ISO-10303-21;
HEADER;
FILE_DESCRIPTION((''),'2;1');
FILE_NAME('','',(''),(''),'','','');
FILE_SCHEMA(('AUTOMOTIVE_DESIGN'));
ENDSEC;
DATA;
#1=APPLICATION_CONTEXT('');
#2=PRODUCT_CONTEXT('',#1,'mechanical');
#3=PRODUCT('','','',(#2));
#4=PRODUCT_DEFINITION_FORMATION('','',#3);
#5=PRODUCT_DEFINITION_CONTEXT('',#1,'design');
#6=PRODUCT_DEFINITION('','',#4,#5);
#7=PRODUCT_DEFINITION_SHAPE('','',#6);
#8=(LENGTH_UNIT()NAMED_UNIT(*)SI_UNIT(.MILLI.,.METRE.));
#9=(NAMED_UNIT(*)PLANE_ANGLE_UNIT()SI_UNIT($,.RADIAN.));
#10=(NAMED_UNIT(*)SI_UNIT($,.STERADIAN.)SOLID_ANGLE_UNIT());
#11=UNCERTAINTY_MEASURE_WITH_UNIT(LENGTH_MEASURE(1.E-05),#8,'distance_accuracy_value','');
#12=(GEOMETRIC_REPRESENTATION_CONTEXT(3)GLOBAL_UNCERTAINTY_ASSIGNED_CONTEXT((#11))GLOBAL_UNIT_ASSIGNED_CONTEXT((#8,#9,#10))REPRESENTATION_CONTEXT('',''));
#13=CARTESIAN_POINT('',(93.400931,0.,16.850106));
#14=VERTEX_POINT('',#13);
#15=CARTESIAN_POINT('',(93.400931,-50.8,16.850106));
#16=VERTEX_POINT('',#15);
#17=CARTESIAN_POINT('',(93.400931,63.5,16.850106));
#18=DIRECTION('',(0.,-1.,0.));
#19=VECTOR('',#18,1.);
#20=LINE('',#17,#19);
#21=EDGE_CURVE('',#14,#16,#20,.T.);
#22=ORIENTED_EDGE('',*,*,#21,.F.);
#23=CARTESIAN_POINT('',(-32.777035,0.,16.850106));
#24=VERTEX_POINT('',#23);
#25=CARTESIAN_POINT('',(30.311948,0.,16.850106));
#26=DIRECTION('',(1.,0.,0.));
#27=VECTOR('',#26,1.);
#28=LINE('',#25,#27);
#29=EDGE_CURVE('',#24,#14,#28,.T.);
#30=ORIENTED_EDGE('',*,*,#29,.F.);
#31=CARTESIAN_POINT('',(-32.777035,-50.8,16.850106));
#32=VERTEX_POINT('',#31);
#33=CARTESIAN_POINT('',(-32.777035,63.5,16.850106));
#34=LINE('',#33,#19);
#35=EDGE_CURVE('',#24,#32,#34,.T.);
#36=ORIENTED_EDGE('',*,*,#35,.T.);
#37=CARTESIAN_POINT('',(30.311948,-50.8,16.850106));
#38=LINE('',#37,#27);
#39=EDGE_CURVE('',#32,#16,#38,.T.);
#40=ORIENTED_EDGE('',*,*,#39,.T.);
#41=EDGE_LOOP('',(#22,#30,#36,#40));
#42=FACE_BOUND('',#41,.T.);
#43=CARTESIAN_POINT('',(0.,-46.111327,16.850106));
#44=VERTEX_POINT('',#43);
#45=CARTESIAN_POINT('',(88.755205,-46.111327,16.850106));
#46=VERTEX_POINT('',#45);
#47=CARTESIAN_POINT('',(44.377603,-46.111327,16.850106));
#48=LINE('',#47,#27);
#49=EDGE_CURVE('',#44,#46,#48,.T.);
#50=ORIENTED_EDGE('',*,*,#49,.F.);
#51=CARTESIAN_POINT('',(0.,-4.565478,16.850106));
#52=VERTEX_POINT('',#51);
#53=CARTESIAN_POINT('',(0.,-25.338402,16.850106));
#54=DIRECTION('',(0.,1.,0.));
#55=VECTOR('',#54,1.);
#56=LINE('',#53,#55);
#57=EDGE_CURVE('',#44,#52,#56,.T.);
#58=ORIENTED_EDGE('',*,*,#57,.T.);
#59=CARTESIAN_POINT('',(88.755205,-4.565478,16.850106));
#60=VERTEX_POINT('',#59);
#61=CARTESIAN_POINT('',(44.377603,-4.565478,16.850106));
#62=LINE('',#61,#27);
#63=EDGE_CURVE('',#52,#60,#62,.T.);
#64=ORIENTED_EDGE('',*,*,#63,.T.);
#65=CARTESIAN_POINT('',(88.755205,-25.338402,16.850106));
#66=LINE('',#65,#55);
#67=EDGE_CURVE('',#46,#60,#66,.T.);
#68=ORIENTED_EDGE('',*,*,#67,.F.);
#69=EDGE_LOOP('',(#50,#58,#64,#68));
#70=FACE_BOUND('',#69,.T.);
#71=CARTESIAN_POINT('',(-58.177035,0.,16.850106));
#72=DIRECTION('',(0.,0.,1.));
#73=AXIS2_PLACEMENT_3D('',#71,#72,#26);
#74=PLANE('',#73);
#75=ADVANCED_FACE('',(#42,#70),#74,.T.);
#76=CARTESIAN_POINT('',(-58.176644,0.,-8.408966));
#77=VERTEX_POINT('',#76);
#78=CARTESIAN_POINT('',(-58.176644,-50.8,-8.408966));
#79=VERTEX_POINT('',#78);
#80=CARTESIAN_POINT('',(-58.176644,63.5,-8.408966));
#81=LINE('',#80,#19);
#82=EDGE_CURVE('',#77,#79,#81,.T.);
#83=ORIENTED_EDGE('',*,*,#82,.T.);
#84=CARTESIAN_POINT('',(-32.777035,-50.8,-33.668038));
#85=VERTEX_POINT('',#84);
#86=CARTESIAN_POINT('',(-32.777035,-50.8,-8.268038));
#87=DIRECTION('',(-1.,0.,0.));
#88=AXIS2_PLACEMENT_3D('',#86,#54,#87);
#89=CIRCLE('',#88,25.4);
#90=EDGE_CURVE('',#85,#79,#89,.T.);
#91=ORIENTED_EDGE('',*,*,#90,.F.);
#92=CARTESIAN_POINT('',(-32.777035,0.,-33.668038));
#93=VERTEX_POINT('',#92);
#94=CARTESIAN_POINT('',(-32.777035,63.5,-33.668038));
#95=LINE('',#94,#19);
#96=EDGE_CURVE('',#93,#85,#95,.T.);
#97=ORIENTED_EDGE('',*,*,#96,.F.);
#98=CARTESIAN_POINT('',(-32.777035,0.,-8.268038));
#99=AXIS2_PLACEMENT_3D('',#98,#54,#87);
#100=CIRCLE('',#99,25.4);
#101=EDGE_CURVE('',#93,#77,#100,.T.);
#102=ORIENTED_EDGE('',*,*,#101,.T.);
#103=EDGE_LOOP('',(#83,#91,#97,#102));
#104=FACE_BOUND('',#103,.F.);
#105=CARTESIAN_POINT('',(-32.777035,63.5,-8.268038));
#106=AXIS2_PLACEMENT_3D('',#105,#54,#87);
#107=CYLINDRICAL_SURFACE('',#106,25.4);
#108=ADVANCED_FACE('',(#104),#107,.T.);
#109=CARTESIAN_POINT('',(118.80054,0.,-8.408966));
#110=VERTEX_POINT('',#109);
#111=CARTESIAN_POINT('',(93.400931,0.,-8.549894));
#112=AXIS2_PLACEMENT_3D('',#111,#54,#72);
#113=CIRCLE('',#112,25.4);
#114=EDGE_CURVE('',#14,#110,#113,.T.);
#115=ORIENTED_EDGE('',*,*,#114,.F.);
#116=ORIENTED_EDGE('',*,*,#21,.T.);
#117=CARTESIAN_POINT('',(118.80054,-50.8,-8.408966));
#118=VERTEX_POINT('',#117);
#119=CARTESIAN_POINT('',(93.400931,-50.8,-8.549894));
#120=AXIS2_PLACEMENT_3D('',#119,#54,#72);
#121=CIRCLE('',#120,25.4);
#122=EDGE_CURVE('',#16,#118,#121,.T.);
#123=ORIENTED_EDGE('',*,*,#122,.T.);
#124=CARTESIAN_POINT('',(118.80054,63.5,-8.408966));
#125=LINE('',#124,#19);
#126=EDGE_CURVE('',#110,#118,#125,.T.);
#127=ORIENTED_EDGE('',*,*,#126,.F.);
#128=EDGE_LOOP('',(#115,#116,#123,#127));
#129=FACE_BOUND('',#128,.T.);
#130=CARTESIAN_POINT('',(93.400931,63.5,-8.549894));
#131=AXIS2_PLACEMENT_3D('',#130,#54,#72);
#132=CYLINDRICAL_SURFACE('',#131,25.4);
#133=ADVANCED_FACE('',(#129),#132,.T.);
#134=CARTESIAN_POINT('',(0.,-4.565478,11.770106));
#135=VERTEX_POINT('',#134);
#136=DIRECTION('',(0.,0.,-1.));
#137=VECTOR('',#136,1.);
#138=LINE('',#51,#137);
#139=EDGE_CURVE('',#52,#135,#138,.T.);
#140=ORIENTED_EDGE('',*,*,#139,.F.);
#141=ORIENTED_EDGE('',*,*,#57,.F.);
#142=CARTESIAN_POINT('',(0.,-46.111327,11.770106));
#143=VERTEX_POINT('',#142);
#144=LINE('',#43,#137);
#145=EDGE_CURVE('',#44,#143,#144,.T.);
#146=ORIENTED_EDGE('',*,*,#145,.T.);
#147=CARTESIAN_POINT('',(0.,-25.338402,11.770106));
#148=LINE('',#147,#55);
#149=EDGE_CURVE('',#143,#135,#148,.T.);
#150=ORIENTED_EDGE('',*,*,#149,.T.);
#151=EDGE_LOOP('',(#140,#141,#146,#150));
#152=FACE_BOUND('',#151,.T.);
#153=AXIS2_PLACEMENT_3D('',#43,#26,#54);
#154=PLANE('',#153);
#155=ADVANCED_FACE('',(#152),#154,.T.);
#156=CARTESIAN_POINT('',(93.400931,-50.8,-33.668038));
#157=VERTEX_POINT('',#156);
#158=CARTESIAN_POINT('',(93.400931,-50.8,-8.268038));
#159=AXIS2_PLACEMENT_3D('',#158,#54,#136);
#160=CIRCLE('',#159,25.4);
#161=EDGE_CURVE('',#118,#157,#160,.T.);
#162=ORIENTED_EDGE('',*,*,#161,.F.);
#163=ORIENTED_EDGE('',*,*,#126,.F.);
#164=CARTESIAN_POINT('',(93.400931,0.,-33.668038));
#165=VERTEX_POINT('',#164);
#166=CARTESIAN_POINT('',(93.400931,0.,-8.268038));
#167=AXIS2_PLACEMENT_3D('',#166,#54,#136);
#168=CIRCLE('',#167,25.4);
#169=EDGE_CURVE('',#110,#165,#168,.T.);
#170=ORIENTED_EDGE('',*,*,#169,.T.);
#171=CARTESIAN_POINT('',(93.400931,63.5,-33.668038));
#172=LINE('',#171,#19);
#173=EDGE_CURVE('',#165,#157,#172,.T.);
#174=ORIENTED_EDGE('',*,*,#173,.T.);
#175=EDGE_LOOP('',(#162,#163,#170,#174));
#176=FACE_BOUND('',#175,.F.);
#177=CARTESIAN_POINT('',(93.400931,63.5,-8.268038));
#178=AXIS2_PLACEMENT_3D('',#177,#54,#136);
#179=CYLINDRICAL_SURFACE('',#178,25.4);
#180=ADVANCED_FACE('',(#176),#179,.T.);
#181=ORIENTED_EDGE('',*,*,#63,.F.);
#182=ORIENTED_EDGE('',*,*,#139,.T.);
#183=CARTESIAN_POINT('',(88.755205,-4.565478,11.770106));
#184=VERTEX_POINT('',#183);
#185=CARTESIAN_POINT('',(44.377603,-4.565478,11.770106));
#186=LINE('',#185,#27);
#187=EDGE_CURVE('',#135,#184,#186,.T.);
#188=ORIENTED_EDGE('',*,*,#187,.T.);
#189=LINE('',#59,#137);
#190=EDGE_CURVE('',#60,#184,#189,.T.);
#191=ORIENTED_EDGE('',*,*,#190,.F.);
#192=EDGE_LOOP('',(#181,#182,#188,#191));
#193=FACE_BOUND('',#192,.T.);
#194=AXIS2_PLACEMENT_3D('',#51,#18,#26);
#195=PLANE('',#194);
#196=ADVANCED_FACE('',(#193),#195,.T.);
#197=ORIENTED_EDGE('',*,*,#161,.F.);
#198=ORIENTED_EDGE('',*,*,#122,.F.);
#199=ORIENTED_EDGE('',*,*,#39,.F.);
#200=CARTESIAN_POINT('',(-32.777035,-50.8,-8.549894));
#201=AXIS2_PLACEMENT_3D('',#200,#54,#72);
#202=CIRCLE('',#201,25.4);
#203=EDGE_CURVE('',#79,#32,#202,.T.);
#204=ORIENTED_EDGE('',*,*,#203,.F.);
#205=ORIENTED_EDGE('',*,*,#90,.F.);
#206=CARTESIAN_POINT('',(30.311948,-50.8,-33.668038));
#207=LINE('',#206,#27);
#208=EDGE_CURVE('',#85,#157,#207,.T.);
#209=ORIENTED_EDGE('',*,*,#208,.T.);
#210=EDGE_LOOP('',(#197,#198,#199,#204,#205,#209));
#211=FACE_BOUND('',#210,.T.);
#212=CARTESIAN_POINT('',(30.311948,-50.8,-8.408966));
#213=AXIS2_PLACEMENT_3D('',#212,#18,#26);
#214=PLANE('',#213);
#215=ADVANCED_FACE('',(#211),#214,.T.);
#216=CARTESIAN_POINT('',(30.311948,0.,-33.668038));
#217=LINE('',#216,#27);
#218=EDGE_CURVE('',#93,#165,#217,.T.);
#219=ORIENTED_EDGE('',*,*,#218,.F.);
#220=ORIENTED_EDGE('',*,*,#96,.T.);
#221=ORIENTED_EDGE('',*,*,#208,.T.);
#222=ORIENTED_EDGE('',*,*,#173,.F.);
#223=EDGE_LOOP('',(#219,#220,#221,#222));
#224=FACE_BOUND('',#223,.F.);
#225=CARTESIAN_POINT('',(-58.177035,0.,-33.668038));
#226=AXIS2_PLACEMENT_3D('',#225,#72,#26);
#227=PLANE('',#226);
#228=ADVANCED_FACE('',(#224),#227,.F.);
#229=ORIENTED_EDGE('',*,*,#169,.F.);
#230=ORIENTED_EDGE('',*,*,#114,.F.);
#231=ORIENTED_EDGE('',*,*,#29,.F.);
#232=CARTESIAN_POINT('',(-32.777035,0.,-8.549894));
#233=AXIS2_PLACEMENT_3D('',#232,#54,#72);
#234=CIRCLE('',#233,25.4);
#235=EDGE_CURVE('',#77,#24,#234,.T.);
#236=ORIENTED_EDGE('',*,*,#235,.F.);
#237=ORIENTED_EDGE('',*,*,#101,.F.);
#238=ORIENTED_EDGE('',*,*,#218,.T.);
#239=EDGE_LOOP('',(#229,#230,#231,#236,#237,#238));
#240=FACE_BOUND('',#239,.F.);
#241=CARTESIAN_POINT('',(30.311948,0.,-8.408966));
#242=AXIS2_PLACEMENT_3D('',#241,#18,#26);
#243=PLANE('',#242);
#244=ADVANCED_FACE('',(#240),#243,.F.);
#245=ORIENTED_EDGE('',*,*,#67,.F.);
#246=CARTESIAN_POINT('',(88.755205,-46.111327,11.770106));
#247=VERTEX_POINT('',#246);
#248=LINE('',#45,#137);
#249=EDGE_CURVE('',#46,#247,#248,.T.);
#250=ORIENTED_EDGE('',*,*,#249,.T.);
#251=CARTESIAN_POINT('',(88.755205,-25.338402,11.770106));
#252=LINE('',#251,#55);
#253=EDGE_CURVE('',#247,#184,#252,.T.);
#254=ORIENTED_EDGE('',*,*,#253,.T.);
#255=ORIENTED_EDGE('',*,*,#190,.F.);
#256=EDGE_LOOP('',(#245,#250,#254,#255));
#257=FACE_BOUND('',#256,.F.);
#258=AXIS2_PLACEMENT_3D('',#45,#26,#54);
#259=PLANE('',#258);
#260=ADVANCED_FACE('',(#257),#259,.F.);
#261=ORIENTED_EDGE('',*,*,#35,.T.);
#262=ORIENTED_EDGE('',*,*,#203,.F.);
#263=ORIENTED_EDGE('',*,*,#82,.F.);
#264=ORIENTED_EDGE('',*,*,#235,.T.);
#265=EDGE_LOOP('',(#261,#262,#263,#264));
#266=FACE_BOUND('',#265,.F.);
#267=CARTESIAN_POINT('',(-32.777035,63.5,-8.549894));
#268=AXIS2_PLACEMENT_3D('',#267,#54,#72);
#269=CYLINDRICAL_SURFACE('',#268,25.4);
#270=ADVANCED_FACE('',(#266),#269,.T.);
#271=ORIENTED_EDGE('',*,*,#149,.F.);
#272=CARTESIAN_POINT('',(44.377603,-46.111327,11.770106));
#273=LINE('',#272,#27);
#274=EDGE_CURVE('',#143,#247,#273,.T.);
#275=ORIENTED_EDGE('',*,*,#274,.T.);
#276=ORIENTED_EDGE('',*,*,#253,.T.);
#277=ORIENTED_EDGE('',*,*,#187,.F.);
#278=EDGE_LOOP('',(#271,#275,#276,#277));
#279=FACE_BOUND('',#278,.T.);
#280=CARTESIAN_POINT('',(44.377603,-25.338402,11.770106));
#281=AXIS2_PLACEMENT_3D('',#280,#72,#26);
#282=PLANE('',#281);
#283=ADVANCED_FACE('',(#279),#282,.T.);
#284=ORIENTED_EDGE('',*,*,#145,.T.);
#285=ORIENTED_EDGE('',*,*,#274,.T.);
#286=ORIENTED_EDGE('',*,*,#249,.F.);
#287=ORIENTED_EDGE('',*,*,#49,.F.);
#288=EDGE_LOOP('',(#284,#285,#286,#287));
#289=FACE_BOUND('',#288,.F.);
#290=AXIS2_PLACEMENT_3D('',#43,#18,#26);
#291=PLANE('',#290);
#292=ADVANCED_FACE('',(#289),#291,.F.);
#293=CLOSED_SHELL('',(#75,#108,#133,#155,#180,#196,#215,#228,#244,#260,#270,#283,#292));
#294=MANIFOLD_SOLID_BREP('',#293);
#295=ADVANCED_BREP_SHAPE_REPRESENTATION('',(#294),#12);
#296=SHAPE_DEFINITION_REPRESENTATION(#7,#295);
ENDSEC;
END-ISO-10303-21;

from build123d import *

# Parameters (mm, degrees)
F0_W        = 176.9779659808
F0_H        = 50.5181439221
F1_DEPTH    = 50.8
F2_T1_DEPTH = 177.8
F3_W        = 88.7552052736
F3_H        = 41.5458488278
F4_DEPTH    = 5.08


# Not quite as in the source:
# - a fillet or chamfer that OpenCascade refuses, or shapes differently, is made with other operations: its cross-section is extruded or revolved along the edge and cut away or added


with BuildPart() as f1:
    # F0 (on Front) → F1 (new body)
    with BuildSketch(Plane.XZ):
        with Locations((30.3119476885, -8.4089655429)):
            Rectangle(F0_W, F0_H)
    extrude(amount=F1_DEPTH)

    # F2: fillet of radius 25.4 on 4 edges, made by hand

    # F2_s2 → F2_t1 (cut)
    with BuildSketch(Plane.XZ.offset(-63.5)):
        with BuildLine():
            ThreePointArc((-32.7770353019, 16.8501064181), (-50.7375475441, 9.4106186603), (-58.1770353019, -8.5498935819))
            Line((-58.1770353019, -8.5498935819), (-58.1770353019, 16.8501064181))
            Line((-58.1770353019, 16.8501064181), (-32.7770353019, 16.8501064181))
        make_face()
        with BuildLine():
            ThreePointArc((-58.1770353019, -8.268037504), (-50.7375475441, -26.2285497461), (-32.7770353019, -33.668037504))
            Line((-32.7770353019, -33.668037504), (-58.1770353019, -33.668037504))
            Line((-58.1770353019, -33.668037504), (-58.1770353019, -8.268037504))
        make_face()
        with BuildLine():
            ThreePointArc((93.4009306788, 16.8501064181), (111.361442921, 9.4106186603), (118.8009306788, -8.5498935819))
            Line((118.8009306788, -8.5498935819), (118.8009306788, 16.8501064181))
            Line((118.8009306788, 16.8501064181), (93.4009306788, 16.8501064181))
        make_face()
        with BuildLine():
            ThreePointArc((93.4009306788, -33.668037504), (111.361442921, -26.2285497461), (118.8009306788, -8.268037504))
            Line((118.8009306788, -8.268037504), (118.8009306788, -33.668037504))
            Line((118.8009306788, -33.668037504), (93.4009306788, -33.668037504))
        make_face()
    extrude(amount=F2_T1_DEPTH, mode=Mode.SUBTRACT)

    # F3 (on face) → F4 (cut)
    with BuildSketch(Plane.XY.offset(16.8501064181)):
        with Locations((44.3776026368, -25.3384022508)):
            Rectangle(F3_W, F3_H)
    extrude(amount=-F4_DEPTH, mode=Mode.SUBTRACT)


solid = f1.part
